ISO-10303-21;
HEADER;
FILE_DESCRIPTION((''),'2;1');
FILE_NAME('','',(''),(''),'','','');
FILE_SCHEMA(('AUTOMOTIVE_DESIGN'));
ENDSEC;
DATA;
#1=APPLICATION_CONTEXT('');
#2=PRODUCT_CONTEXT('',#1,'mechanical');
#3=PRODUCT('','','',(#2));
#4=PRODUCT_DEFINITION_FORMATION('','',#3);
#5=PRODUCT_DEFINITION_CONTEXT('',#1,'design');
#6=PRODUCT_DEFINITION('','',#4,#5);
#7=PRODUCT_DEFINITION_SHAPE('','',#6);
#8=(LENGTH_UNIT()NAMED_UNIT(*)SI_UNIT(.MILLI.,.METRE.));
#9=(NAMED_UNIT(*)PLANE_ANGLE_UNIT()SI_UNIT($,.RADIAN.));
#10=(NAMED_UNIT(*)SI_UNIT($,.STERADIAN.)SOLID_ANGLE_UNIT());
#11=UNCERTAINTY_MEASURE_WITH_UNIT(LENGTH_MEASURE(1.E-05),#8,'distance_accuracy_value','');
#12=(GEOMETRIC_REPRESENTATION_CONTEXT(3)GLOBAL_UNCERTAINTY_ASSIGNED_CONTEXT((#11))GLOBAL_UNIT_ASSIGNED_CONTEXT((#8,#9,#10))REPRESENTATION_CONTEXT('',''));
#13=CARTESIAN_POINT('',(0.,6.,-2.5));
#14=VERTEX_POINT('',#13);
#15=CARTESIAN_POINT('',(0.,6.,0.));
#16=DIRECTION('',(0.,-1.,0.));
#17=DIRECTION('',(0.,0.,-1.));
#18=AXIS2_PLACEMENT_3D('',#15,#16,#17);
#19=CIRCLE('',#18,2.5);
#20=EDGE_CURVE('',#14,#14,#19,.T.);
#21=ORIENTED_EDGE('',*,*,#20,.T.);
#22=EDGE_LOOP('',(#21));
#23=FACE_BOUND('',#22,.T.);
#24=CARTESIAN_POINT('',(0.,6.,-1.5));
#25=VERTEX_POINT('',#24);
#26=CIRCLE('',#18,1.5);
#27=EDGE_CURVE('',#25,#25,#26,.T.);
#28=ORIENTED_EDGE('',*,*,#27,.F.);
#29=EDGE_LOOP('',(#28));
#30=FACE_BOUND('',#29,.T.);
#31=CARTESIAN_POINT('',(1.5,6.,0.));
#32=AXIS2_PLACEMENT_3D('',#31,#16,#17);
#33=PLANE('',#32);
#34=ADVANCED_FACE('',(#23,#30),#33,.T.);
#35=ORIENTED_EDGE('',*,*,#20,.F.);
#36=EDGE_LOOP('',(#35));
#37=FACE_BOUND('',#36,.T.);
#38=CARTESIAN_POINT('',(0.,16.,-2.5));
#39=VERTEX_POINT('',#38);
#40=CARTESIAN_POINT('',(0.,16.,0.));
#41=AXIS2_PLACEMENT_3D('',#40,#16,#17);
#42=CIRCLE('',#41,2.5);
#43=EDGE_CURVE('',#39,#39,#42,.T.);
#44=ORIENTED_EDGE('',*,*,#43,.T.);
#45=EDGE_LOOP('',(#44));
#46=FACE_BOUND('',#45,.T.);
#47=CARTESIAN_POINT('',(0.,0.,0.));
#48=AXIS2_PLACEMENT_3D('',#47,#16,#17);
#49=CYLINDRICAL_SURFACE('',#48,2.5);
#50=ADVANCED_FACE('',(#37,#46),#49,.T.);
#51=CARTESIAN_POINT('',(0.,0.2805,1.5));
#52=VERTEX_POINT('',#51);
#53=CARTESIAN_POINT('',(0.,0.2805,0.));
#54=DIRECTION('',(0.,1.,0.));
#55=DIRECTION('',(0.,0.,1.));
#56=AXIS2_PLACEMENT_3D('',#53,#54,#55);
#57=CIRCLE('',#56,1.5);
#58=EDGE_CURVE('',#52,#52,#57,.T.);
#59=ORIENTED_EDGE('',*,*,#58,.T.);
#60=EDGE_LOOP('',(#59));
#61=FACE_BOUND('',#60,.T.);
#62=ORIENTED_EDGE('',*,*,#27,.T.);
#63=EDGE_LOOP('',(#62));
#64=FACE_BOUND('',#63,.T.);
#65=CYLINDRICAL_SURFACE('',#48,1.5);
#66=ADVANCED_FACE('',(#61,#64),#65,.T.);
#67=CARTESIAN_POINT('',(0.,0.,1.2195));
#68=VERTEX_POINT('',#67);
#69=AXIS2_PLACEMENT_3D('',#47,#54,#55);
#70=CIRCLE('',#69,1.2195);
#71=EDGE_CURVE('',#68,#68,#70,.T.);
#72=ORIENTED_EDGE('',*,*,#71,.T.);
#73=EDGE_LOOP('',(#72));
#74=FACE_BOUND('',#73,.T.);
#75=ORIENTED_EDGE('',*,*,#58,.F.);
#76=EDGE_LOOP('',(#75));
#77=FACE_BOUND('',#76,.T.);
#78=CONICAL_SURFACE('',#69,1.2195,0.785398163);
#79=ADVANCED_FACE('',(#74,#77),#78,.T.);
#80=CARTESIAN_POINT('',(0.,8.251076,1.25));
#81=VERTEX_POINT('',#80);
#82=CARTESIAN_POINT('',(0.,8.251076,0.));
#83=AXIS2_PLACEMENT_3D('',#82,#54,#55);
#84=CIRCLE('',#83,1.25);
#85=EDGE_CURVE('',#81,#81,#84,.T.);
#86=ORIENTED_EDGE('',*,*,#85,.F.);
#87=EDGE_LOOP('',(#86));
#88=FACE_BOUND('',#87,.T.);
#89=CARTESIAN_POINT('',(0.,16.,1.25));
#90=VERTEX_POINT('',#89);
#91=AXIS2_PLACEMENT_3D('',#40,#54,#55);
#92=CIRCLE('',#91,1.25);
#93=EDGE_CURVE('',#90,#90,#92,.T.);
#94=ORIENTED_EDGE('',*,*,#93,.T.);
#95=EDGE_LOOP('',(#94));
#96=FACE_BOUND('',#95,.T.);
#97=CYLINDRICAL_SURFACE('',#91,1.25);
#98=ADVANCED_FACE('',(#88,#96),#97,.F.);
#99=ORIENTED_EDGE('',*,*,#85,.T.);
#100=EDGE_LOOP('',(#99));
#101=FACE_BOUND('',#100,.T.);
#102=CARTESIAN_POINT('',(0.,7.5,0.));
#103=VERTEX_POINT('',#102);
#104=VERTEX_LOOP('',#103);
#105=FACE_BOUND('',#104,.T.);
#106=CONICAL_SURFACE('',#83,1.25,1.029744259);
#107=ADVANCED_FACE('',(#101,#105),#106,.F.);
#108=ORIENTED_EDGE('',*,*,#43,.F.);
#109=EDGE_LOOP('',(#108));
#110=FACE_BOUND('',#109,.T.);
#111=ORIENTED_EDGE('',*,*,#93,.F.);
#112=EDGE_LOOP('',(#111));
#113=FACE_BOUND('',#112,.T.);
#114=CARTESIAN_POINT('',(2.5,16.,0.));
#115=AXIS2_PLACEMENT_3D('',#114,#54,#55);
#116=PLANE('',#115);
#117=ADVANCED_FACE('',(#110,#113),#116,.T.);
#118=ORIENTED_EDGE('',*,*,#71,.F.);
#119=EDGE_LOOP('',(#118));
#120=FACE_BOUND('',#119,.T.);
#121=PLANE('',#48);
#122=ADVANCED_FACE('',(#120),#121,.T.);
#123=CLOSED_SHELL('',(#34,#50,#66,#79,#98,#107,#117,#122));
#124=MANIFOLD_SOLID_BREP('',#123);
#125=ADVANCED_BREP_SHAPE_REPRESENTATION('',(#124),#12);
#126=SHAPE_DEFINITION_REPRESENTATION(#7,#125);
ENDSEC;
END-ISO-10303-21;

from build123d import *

# Parameters (mm, degrees)
M3_TAPPED_HOLE1_D     = 2.5
M3_TAPPED_HOLE1_DEPTH = 7.748924226
M3_TAPPED_HOLE1_TIP   = 0.751075774


# Read off the part's stored shape, not the designer's step: M3 Machine Threads Stud1
with BuildPart() as part:
    # Sketch2 → Revolve1 (revolve)
    with BuildSketch(Plane.XY, mode=Mode.PRIVATE) as revolve1_sk:
        Polygon((0, 0), (1.5, 0), (1.5, 6), (2.5, 6), (2.5, 16), (0, 16), align=None)
    revolve(revolve1_sk.sketch.rotate(Axis((0, 0, 0), (0, 1, 0)), 90), axis=Axis((0, 0, 0), (0, 1, 0)))

    # M3 Machine Threads Stud1 outline → M3 Machine Threads Stud1 (revolve, cut)
    with BuildSketch(Plane.XY):
        Polygon((1.5, 0.2805), (1.2195, 0), (1.5, 0), align=None)
    revolve(axis=Axis((0, 0, 0), (0, 1, 0)), mode=Mode.SUBTRACT)

    # M3 Tapped Hole1
    with Locations(Plane(origin=(0, 16, 0), x_dir=(1, 0, 0), z_dir=(0, 1, 0))):
        with Locations((0, 0)):
            Hole(M3_TAPPED_HOLE1_D / 2, depth=M3_TAPPED_HOLE1_DEPTH)
            with Locations((0, 0, -(M3_TAPPED_HOLE1_DEPTH + M3_TAPPED_HOLE1_TIP / 2))):  # 118° drill point
                Cone(0, M3_TAPPED_HOLE1_D / 2, M3_TAPPED_HOLE1_TIP, mode=Mode.SUBTRACT)


solid = part.part
